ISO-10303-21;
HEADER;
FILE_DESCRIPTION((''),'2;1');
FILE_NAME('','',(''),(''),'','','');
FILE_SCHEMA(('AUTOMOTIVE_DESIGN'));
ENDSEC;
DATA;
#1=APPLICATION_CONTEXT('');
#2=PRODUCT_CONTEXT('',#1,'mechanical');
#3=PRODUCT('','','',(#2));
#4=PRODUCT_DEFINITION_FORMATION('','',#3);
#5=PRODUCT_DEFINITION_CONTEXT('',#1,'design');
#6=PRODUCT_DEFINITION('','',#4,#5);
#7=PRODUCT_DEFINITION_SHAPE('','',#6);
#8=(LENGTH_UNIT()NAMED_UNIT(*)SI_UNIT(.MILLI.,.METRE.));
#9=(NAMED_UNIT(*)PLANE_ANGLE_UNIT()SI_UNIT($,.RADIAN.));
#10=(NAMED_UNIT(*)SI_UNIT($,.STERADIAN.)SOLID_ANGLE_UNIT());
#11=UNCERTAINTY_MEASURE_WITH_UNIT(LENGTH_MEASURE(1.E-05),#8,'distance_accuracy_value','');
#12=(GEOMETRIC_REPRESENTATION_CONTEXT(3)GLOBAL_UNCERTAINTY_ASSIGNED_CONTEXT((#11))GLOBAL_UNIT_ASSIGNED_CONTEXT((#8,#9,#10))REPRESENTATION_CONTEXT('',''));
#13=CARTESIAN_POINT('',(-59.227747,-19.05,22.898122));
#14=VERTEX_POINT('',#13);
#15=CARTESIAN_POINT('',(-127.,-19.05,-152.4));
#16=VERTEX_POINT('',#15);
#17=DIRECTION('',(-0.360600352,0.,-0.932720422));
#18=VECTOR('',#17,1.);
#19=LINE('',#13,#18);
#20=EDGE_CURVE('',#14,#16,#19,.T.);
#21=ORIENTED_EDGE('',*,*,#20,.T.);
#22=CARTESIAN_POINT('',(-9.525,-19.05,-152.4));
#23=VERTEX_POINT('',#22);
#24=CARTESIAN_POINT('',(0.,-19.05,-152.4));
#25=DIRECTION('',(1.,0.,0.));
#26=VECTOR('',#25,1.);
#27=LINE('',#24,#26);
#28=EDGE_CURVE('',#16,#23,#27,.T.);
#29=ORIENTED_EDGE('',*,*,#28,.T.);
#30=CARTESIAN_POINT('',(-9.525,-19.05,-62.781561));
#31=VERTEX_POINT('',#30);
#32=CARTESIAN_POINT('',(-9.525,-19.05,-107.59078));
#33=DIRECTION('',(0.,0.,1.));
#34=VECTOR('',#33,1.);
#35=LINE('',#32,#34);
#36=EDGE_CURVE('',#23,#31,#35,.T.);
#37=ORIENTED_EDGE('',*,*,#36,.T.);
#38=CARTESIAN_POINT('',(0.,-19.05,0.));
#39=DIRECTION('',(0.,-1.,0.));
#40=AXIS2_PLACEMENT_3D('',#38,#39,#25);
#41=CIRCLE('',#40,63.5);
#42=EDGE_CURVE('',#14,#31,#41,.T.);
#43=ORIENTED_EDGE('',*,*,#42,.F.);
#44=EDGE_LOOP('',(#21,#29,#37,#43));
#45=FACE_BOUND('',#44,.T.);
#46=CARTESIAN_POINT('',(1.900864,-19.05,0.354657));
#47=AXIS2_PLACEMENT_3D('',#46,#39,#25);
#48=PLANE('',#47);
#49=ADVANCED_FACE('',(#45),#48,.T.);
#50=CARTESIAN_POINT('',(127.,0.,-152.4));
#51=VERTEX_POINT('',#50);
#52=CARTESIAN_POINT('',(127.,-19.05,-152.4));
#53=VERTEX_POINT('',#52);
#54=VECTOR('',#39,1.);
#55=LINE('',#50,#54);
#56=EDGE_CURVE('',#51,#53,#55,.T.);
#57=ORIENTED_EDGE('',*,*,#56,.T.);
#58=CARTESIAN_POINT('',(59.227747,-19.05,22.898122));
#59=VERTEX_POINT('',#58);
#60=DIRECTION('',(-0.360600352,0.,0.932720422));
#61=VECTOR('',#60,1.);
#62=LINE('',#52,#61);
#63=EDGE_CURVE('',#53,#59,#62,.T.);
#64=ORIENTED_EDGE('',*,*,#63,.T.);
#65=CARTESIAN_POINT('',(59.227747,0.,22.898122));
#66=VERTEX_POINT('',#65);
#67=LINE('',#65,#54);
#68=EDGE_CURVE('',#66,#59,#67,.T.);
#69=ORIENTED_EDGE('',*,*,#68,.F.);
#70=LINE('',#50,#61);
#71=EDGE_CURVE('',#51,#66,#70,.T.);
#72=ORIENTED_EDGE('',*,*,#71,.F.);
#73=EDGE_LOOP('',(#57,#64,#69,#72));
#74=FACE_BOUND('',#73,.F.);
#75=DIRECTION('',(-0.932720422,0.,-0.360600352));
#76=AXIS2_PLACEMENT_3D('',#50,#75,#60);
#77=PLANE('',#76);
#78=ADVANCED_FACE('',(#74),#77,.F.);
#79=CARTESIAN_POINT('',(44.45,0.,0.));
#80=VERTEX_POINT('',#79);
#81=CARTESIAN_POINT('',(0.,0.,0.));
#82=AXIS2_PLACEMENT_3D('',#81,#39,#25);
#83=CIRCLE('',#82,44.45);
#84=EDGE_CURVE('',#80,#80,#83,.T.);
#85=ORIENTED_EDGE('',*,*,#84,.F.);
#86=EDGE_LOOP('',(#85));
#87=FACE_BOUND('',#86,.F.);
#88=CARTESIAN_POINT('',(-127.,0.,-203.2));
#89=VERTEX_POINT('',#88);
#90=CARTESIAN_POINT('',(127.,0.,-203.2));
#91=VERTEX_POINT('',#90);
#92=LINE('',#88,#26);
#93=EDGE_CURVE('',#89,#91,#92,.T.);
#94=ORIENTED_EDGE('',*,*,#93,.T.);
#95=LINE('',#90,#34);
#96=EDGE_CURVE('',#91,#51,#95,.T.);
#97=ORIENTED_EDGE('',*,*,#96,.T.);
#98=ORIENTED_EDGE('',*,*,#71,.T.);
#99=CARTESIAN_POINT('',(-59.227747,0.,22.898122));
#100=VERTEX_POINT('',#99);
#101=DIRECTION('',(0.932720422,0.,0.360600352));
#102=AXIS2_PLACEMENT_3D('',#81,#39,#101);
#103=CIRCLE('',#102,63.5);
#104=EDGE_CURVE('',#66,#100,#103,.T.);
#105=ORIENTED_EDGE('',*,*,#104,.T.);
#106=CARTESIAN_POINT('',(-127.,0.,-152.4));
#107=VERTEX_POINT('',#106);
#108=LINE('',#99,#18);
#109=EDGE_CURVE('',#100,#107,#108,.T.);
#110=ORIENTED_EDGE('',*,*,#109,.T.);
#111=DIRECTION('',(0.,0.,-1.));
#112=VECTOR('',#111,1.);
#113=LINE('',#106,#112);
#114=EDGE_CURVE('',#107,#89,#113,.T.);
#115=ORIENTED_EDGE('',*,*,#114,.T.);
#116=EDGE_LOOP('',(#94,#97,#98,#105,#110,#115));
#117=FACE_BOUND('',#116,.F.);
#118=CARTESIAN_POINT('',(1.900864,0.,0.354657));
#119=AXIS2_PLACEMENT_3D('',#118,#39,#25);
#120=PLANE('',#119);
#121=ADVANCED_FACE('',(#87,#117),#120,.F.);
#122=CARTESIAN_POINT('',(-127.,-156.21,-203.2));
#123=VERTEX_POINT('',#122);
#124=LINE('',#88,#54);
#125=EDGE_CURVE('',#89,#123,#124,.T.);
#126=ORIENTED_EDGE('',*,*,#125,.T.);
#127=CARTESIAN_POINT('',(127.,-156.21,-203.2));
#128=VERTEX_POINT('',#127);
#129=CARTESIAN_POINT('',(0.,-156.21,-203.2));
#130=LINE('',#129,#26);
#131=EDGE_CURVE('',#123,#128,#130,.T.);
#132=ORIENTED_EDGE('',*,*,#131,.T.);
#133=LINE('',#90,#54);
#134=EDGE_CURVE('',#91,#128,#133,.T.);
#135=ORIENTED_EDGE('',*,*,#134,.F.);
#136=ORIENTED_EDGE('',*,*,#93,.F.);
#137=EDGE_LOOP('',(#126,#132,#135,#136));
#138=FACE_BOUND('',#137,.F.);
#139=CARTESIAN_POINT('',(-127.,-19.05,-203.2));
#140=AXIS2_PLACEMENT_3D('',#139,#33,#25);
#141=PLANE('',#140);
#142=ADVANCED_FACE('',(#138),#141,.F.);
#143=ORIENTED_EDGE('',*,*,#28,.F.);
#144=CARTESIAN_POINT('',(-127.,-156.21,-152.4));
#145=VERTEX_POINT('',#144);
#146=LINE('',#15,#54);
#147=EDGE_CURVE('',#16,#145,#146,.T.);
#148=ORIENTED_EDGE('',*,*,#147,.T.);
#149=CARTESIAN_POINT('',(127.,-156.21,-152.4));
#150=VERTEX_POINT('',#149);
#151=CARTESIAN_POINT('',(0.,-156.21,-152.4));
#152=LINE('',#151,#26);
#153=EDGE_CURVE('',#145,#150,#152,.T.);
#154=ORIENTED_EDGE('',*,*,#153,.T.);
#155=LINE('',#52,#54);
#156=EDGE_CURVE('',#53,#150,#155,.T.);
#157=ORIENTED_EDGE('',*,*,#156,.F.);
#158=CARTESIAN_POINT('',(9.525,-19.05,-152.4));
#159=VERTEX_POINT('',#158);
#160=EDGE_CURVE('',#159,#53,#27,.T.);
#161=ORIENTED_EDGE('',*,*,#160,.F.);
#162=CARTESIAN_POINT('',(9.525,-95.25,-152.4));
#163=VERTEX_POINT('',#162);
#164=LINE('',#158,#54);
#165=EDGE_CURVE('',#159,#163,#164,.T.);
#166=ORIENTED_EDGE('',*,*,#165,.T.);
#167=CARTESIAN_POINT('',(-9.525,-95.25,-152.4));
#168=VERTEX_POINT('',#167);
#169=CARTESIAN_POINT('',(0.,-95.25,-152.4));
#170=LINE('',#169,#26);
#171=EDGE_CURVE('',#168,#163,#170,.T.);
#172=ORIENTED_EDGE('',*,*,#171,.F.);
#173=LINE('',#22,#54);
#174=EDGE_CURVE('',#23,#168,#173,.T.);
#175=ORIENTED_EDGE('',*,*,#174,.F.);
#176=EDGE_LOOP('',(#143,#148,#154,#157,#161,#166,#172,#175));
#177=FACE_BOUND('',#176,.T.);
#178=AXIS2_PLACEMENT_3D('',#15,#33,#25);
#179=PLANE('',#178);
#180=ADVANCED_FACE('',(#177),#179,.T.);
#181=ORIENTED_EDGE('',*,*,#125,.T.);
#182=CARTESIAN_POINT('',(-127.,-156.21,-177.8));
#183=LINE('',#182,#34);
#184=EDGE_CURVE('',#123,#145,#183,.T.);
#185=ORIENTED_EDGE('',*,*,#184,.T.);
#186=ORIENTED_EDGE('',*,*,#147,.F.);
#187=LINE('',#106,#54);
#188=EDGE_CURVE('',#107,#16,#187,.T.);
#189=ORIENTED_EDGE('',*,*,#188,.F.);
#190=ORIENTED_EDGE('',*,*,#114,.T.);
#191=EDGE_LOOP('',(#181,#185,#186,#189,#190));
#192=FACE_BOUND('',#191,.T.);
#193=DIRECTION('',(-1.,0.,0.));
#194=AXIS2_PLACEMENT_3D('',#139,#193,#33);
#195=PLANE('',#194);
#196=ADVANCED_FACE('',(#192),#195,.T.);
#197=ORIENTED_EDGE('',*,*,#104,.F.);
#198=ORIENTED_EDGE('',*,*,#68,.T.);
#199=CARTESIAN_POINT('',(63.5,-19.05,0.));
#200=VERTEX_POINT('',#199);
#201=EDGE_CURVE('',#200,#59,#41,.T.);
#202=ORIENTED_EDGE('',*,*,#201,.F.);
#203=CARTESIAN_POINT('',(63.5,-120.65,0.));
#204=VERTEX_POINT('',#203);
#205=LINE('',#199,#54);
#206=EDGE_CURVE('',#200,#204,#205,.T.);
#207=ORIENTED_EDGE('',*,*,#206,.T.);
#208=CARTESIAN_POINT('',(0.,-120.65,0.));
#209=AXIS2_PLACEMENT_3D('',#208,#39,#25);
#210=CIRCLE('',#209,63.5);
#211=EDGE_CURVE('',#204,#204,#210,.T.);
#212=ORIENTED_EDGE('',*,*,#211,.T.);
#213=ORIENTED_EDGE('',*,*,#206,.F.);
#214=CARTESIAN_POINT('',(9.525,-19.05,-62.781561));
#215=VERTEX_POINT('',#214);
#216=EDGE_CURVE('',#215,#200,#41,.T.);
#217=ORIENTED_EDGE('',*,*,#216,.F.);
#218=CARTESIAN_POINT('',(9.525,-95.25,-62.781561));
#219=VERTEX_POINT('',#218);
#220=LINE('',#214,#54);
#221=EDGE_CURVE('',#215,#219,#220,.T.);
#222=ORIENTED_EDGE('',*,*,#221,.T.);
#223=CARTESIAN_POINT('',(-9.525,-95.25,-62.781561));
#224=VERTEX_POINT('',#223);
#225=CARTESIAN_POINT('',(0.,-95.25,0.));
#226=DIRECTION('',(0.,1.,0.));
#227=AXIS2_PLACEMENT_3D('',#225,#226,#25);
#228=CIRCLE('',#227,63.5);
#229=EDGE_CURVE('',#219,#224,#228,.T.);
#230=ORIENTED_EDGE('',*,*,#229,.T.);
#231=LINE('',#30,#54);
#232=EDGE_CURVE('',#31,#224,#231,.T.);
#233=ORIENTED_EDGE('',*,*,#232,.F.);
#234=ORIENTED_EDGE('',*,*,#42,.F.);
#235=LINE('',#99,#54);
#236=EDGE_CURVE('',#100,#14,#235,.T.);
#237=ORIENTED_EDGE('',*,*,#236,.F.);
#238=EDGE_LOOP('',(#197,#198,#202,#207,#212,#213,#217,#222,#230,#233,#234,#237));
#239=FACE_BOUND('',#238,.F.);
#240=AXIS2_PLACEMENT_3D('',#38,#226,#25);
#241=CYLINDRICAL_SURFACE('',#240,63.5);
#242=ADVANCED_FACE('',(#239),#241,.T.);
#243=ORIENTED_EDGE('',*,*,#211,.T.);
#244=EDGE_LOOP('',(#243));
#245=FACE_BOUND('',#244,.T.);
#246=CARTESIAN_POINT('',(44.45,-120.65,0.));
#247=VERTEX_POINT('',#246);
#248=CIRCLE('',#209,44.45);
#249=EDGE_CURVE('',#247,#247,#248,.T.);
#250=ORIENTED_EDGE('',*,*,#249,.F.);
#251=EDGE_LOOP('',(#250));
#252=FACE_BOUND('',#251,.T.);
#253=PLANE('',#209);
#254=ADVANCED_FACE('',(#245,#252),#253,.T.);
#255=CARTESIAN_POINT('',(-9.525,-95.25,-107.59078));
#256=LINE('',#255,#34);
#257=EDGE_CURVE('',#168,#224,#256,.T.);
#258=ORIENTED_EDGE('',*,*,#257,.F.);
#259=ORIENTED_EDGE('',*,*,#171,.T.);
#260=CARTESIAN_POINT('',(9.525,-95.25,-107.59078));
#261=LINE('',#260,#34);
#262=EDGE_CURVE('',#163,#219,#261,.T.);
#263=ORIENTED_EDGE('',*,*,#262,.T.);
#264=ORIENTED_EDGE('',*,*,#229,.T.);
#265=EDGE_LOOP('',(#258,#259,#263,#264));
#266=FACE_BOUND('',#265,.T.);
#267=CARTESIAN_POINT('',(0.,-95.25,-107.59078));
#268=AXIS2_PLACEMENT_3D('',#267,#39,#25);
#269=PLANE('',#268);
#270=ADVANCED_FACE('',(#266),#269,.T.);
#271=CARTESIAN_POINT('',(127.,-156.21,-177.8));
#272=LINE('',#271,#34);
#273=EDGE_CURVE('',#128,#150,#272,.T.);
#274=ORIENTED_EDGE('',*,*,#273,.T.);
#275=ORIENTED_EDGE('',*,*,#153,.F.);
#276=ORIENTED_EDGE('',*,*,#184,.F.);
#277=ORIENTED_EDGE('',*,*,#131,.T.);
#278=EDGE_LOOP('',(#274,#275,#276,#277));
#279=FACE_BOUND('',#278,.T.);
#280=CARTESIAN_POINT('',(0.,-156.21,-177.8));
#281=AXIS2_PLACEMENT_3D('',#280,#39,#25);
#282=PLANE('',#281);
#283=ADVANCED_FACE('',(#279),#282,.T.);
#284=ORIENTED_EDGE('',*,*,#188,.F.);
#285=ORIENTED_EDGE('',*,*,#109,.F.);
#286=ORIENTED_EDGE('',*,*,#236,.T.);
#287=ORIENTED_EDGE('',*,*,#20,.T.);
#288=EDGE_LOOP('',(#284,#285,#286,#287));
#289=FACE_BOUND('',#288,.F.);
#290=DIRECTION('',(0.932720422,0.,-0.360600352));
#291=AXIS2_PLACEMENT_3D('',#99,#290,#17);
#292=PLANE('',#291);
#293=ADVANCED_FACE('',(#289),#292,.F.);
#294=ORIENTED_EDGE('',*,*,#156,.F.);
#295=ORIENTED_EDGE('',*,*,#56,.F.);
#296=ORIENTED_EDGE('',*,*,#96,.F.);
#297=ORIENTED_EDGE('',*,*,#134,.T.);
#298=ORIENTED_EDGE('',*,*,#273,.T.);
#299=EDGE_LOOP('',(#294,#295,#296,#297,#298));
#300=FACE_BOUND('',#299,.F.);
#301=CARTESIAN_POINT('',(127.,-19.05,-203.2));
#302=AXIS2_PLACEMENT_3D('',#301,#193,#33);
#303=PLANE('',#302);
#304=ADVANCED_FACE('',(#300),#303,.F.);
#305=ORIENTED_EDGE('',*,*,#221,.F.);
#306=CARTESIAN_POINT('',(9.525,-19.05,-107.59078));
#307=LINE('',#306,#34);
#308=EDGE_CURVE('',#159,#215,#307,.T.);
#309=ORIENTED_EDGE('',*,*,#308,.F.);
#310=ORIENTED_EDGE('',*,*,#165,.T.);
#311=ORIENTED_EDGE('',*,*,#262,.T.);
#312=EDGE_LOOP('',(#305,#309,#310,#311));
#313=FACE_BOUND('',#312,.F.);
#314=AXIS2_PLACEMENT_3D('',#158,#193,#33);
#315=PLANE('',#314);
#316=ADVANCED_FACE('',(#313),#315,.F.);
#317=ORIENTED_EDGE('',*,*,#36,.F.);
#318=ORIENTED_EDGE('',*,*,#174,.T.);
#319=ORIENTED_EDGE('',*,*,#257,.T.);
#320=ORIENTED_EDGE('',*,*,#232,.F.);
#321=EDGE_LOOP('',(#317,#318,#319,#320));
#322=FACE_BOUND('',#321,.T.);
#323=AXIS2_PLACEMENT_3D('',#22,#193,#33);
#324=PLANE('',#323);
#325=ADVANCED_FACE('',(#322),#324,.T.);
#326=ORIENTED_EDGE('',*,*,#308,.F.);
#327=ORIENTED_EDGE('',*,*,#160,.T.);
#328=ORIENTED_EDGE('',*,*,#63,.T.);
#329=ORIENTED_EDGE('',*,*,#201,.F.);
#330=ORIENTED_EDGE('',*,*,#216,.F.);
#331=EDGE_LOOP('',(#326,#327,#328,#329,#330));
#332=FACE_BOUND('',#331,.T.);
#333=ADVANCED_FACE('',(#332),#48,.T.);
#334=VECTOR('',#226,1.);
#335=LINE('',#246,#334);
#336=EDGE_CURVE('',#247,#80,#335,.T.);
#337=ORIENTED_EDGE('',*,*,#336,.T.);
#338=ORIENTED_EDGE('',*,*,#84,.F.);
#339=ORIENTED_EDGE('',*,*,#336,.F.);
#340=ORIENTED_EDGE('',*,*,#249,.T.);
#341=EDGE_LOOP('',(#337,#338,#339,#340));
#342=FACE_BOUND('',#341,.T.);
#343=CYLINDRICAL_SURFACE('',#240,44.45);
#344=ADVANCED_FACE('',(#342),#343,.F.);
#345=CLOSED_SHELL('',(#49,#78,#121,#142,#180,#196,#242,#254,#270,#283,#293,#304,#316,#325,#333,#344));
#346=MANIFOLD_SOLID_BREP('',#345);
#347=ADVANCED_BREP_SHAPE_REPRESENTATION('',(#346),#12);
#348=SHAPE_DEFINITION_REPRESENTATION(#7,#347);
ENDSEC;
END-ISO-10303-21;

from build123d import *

# Parameters (mm, degrees)
F0_R     = 44.45
F1_DEPTH = 19.05
F2_W     = 254
F2_H     = 50.8
F3_DEPTH = 137.16
F4_R     = 63.5
F4_R_2   = 44.45
F5_DEPTH = 101.6
F6_W     = 19.05
F6_H     = 89.6184392118
F7_DEPTH = 76.2


with BuildPart() as f1:
    # F0 (on Front) → F1 (new body)
    with BuildSketch(Plane.XZ):
        with BuildLine():
            ThreePointArc((-59.2277468166, 22.8981223472), (-11.6466320699, -62.4228000127), (63.5, 0))
            ThreePointArc((63.5, 0), (62.4228000127, 11.6466320699), (59.2277468166, 22.8981223472))
            ThreePointArc((59.2277468166, 22.8981223472), (0, 63.5), (-59.2277468166, 22.8981223472))
        make_face()
        Circle(F0_R, mode=Mode.SUBTRACT)
        with BuildLine():
            ThreePointArc((59.2277468166, 22.8981223472), (62.4228000127, 11.6466320699), (63.5, 0))
            ThreePointArc((63.5, 0), (-11.6466320699, -62.4228000127), (-59.2277468166, 22.8981223472))
            Line((-59.2277468166, 22.8981223472), (-127, -152.4))
            Line((-127, -152.4), (-127, -203.2))
            Line((-127, -203.2), (127, -203.2))
            Line((127, -203.2), (127, -152.4))
            Line((127, -152.4), (59.2277468166, 22.8981223472))
        make_face()
    extrude(amount=F1_DEPTH)

    # F2 (on face) → F3 (join)
    with BuildSketch(Plane.XZ.offset(19.05)):
        with Locations((0, -177.8)):
            Rectangle(F2_W, F2_H)
    extrude(amount=F3_DEPTH)

    # F4 (on face) → F5 (join)
    with BuildSketch(Plane.XZ.offset(19.05)):
        Circle(F4_R)
        Circle(F4_R_2, mode=Mode.SUBTRACT)
    extrude(amount=F5_DEPTH)

    # F6 (on face) → F7 (join)
    with BuildSketch(Plane.XZ.offset(19.05)):
        with Locations((0, -107.5907803941)):
            Rectangle(F6_W, F6_H)
    extrude(amount=F7_DEPTH)


solid = f1.part
